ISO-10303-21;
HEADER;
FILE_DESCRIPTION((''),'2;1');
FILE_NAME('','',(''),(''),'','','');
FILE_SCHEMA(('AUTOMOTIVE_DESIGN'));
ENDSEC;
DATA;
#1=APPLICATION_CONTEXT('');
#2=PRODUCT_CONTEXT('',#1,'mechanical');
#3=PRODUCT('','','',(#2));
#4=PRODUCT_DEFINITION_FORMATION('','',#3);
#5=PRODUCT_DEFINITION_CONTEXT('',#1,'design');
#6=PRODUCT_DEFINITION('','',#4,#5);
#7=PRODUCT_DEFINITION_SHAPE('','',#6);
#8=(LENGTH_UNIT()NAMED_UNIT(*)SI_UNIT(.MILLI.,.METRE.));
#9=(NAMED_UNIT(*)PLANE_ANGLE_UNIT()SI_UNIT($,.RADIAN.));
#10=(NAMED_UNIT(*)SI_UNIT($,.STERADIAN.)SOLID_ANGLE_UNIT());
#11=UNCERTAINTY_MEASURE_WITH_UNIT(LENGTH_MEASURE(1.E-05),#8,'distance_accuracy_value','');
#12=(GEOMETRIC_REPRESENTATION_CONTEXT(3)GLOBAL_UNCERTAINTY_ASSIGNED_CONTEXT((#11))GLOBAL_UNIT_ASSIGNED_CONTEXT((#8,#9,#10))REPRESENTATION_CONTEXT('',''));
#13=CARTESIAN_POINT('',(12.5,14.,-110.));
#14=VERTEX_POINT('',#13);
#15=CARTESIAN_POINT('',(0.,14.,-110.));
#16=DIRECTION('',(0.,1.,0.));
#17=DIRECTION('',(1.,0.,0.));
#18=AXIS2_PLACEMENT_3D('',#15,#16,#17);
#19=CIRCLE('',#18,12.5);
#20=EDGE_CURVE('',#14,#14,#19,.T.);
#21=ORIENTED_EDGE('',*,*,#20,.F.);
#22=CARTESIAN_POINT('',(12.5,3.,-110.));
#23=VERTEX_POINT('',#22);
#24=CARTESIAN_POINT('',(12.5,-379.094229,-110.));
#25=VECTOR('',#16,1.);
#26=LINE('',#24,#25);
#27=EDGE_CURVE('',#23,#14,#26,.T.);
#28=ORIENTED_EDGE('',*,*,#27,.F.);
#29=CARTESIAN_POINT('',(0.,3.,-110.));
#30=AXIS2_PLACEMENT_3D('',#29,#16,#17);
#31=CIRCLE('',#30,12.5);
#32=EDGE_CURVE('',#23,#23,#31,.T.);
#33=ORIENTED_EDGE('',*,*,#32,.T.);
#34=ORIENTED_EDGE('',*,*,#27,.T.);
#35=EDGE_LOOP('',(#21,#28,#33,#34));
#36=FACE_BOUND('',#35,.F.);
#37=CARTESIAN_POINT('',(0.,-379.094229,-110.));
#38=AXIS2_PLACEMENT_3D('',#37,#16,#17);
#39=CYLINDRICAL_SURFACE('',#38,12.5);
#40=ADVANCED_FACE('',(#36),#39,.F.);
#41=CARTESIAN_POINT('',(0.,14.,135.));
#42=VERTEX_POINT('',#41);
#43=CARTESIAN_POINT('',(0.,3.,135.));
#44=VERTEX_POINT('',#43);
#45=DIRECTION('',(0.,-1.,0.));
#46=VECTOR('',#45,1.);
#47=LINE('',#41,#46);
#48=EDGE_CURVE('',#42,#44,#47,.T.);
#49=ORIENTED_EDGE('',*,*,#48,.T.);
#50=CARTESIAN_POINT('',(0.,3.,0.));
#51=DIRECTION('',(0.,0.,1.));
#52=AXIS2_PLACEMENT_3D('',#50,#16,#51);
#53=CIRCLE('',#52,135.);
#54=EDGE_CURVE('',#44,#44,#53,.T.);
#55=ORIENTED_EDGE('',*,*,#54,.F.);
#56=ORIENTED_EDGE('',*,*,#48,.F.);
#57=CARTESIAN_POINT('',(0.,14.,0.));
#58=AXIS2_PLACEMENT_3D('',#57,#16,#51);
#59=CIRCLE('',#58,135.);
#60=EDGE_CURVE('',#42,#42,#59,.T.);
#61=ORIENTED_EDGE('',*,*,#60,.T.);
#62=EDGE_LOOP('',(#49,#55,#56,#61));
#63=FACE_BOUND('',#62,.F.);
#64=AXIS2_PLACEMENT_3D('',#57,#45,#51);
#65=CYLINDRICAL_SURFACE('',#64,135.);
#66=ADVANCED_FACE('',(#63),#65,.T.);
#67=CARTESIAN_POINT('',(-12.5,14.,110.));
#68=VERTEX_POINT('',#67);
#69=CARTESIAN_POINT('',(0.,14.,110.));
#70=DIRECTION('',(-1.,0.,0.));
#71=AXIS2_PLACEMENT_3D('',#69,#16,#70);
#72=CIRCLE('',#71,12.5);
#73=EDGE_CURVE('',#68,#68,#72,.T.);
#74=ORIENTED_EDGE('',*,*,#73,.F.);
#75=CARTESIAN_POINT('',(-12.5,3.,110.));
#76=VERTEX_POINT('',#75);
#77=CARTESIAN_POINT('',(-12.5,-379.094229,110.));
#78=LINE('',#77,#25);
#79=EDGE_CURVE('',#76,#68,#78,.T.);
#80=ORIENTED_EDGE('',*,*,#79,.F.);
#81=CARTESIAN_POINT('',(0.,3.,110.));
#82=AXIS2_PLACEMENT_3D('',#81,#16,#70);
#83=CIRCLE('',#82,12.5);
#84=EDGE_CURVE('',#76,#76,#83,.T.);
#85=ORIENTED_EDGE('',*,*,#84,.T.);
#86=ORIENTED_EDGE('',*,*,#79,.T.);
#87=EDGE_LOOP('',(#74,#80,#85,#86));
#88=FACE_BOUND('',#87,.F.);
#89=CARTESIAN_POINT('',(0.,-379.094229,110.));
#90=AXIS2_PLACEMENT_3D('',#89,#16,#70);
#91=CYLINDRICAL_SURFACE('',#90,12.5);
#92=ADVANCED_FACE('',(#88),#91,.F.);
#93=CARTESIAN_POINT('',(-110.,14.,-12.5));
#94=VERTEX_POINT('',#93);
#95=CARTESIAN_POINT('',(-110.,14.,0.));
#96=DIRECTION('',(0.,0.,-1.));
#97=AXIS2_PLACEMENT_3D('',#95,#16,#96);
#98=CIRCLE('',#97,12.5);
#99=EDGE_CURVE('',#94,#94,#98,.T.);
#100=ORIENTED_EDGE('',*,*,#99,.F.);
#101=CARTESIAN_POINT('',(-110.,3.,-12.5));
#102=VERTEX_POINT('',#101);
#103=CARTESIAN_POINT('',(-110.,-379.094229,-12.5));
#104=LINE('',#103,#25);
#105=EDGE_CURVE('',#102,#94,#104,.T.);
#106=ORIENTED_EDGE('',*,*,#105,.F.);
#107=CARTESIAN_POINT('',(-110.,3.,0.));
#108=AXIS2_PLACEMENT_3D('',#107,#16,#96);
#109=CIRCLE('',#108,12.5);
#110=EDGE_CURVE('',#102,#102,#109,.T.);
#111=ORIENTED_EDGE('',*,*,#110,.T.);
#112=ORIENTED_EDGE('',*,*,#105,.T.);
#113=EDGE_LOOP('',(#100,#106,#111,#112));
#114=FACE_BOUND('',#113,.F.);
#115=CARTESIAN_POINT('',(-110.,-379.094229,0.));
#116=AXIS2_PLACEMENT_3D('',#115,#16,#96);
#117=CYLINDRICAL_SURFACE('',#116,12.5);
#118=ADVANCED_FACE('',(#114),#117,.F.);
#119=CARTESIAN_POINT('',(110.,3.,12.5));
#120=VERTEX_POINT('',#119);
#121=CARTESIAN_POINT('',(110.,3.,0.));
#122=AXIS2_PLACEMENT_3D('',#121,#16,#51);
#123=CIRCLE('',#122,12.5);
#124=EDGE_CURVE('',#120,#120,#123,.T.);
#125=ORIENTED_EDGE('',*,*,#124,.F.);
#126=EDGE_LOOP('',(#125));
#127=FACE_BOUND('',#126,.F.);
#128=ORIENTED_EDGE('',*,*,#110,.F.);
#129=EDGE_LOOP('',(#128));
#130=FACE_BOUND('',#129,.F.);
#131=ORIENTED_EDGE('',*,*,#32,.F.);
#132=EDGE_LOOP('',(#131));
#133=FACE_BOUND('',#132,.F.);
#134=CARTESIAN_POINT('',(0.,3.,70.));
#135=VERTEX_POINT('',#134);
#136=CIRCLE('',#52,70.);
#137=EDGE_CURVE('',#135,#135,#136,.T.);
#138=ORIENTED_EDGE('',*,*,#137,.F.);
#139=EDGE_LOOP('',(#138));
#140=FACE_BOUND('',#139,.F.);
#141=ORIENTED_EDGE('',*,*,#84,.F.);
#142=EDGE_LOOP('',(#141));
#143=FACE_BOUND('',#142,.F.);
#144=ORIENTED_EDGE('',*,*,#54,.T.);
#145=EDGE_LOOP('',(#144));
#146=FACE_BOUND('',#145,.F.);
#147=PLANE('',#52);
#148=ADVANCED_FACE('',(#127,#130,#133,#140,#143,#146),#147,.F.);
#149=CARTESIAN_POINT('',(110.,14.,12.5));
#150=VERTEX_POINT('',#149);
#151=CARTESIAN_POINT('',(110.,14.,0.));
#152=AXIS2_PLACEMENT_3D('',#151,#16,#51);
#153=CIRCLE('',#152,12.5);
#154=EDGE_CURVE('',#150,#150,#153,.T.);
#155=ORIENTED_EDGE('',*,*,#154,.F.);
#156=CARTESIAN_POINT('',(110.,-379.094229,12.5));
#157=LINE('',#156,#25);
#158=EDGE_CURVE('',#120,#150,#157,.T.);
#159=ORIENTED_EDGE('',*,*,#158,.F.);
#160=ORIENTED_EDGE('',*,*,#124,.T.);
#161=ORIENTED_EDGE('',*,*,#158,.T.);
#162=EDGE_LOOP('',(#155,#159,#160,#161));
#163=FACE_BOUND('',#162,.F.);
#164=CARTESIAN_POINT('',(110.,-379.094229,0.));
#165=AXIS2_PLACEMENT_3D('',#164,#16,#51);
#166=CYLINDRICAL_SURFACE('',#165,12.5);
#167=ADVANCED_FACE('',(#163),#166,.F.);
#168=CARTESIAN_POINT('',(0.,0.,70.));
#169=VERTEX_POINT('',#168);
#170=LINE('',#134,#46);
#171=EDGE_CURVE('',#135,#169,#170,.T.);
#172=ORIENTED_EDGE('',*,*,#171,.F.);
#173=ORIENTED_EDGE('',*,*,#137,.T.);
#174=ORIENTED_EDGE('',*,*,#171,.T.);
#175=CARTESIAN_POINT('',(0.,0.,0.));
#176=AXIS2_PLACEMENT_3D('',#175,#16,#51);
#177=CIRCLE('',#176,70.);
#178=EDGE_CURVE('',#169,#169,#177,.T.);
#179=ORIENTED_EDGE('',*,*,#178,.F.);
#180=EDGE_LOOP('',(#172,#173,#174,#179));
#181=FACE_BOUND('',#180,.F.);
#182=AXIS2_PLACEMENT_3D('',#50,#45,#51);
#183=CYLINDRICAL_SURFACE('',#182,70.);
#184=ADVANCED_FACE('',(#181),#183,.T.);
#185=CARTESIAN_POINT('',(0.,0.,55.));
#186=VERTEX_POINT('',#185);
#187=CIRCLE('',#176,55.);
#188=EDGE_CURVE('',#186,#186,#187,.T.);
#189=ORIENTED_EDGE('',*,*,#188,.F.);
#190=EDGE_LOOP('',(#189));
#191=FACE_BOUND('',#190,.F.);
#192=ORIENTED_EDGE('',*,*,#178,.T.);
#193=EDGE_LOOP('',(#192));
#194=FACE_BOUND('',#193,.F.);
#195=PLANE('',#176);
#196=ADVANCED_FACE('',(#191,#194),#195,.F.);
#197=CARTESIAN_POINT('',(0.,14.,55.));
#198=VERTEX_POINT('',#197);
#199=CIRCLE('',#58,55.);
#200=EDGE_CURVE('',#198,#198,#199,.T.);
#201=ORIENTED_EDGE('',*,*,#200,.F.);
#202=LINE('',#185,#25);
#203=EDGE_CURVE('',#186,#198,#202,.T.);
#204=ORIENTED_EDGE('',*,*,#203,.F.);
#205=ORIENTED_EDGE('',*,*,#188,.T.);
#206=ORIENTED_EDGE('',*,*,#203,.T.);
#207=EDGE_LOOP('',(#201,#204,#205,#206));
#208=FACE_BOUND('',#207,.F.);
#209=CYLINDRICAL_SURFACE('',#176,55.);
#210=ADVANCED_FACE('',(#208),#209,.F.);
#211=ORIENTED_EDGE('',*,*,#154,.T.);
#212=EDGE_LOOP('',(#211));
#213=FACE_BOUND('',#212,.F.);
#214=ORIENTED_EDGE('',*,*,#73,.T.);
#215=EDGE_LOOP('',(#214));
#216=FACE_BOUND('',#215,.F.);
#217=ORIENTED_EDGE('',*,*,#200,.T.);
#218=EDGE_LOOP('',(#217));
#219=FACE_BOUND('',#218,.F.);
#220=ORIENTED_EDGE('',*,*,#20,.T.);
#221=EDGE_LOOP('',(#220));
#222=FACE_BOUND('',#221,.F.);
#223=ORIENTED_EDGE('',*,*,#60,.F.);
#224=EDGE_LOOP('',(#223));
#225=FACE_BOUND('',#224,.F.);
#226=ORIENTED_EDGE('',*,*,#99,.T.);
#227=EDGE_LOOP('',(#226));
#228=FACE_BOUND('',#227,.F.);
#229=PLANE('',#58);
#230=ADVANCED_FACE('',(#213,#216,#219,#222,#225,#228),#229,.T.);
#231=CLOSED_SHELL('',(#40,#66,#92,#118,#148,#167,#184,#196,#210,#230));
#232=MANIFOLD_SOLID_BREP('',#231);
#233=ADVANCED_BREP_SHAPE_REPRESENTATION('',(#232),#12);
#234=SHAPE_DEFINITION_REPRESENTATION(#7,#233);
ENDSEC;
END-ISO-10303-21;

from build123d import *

# Parameters (mm, degrees)
F3_D            = 25
F3_COPIES_COUNT = 4


# Not quite as in the source:
# - a pattern or mirror of a feature is missing from the dataset's text; its kind, count and spacing are read off the source's solid


with BuildPart() as f1:
    # F0 (on Right) → F1 (revolve)
    with BuildSketch(Plane.YZ):
        Polygon((0, 70), (0, 55), (14, 55), (14, 135), (3, 135), (3, 70), align=None)
    revolve(axis=Axis((0, 31.8317301571, 0), (0, 1, 0)))

    # F3 (through all)
    with Locations(Plane.XZ.offset(-3)):
        with Locations((0, 110)):
            f3 = Hole(F3_D / 2)

    # F3_copies: F3 ×4 about axis
    f3_copies_axis = Axis((0, 0, 0), (0, 1, 0))
    for i in range(1, F3_COPIES_COUNT):
        add(f3.rotate(f3_copies_axis, i * 360 / F3_COPIES_COUNT), mode=Mode.SUBTRACT)


solid = f1.part
